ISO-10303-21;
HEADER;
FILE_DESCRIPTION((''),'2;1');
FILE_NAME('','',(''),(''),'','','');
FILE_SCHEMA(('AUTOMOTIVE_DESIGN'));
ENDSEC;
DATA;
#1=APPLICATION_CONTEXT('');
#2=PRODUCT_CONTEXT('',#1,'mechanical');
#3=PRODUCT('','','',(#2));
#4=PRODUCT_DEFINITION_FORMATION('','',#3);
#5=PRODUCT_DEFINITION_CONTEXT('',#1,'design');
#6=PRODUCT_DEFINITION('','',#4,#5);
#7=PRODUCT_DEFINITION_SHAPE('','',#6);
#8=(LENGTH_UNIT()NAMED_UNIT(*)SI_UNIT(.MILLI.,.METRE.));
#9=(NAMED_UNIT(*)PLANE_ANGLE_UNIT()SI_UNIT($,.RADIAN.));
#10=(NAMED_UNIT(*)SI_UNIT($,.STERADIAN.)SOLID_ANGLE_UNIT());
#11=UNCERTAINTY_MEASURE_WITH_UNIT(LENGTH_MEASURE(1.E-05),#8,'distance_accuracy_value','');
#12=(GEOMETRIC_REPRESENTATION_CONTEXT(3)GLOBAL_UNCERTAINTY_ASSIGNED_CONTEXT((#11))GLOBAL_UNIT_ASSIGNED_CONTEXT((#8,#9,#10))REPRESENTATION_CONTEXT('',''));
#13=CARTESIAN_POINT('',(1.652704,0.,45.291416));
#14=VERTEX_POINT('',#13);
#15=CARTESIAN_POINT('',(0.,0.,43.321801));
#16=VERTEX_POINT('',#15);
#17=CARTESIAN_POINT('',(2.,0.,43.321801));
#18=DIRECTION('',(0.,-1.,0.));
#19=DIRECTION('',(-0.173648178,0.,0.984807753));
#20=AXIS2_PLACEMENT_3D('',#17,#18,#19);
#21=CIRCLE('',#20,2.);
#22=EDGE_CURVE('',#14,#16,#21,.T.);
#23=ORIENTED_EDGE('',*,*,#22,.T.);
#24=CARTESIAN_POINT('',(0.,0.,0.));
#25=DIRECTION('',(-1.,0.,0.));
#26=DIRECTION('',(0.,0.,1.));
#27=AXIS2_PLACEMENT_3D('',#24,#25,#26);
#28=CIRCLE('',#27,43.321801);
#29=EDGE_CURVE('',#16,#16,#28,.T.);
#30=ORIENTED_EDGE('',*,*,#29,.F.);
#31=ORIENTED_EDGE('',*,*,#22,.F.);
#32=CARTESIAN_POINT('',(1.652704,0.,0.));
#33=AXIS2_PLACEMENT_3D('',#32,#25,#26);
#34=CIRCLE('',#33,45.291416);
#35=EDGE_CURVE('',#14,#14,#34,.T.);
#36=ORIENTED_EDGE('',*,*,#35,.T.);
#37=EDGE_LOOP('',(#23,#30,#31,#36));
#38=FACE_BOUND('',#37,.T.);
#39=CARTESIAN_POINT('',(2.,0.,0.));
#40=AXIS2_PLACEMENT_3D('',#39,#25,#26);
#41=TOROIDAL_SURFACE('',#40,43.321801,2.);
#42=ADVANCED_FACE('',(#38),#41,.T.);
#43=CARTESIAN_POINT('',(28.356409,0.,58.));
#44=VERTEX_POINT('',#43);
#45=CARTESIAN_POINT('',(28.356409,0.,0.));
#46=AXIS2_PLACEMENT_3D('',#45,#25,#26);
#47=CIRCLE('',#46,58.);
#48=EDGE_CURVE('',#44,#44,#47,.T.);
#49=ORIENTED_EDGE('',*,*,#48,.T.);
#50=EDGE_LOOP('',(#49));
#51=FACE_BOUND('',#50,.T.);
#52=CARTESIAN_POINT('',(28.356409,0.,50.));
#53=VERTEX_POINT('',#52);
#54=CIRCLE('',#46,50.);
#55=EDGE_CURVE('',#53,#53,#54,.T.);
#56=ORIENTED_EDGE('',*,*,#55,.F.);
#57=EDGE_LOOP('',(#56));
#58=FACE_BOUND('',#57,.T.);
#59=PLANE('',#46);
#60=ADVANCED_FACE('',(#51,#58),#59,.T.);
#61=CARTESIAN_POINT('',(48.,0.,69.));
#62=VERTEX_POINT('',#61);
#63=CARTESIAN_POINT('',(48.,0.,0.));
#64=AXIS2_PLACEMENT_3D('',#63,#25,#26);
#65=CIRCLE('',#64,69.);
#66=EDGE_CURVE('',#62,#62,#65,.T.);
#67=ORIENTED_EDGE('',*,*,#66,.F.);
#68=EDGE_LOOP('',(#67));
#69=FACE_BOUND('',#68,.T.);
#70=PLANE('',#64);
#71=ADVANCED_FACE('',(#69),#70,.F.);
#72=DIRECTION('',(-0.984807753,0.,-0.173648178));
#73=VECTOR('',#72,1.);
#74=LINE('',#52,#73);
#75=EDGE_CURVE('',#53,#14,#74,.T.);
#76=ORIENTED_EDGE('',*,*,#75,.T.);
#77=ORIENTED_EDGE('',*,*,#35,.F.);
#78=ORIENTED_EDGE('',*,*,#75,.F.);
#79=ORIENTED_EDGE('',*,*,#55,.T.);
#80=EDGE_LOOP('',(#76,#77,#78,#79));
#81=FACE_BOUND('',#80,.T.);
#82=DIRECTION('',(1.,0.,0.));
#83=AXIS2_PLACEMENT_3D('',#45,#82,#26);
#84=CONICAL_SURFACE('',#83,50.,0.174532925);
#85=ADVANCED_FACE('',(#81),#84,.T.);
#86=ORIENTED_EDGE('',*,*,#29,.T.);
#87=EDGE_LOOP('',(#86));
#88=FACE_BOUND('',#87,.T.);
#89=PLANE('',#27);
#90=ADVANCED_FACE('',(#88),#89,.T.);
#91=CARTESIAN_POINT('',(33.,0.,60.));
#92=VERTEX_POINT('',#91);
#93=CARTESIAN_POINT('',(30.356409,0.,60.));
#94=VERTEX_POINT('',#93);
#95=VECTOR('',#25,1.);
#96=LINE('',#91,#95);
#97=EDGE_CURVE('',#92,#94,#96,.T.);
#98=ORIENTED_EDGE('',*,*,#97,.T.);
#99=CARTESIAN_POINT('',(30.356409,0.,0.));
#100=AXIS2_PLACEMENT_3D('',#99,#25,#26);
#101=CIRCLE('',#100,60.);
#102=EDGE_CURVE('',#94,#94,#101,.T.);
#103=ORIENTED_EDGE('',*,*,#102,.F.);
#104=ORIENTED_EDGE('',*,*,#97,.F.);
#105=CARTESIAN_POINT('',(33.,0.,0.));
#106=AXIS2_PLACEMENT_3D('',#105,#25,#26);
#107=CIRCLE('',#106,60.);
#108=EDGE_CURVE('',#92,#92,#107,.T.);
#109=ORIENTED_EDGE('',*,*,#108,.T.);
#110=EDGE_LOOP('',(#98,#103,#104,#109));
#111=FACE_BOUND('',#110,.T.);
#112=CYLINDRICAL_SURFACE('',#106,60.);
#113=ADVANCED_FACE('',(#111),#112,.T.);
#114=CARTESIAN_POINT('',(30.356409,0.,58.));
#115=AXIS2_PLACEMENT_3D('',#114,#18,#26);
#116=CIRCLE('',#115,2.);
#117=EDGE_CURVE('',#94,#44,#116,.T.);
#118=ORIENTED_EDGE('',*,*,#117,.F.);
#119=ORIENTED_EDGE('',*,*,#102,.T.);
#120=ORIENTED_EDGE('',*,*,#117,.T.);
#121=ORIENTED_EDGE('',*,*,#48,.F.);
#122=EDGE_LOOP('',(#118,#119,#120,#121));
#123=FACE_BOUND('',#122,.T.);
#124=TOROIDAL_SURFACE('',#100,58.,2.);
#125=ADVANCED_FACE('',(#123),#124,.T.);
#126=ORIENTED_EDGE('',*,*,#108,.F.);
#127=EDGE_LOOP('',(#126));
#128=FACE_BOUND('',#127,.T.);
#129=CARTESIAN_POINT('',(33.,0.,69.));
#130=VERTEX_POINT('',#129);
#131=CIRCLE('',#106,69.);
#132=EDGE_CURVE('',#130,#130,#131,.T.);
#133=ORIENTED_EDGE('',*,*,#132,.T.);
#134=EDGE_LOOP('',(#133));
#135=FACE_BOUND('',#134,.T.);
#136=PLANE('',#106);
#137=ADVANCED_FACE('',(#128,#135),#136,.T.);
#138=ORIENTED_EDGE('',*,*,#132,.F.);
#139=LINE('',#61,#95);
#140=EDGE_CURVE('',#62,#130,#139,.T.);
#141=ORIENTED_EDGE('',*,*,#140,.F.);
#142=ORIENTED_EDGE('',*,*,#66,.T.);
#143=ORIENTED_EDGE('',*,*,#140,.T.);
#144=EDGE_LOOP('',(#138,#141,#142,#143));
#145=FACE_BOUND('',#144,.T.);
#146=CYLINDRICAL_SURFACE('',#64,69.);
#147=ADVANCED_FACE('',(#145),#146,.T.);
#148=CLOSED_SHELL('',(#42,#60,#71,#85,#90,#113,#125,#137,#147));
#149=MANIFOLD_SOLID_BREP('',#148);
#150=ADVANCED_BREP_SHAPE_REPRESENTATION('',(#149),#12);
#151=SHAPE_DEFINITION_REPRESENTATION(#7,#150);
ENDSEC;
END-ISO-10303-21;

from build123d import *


# Not quite as in the source:
# - a feature of the source that left no trace in its solid (it failed there, or was rolled back) is left out


with BuildPart() as f1:
    # F0 (on Front) → F1 (revolve)
    with BuildSketch(Plane.XZ):
        with BuildLine():
            Line((0, 43.3218007376), (0, 0))
            Line((0, 0), (48, 0))
            Line((48, 0), (48, 69))
            Line((48, 69), (33, 69))
            Line((33, 69), (33, 60))
            Line((33, 60), (30.3564090981, 60))
            ThreePointArc((30.3564090981, 60), (28.9421955357, 59.4142135624), (28.3564090981, 58))
            Line((28.3564090981, 58), (28.3564090981, 50))
            Line((28.3564090981, 50), (1.6527036447, 45.2914162437))
            ThreePointArc((1.6527036447, 45.2914162437), (0.4679111138, 44.607375957), (0, 43.3218007376))
        make_face()
    revolve(axis=Axis((24, 0, 0), (-1, 0, 0)))


solid = f1.part
